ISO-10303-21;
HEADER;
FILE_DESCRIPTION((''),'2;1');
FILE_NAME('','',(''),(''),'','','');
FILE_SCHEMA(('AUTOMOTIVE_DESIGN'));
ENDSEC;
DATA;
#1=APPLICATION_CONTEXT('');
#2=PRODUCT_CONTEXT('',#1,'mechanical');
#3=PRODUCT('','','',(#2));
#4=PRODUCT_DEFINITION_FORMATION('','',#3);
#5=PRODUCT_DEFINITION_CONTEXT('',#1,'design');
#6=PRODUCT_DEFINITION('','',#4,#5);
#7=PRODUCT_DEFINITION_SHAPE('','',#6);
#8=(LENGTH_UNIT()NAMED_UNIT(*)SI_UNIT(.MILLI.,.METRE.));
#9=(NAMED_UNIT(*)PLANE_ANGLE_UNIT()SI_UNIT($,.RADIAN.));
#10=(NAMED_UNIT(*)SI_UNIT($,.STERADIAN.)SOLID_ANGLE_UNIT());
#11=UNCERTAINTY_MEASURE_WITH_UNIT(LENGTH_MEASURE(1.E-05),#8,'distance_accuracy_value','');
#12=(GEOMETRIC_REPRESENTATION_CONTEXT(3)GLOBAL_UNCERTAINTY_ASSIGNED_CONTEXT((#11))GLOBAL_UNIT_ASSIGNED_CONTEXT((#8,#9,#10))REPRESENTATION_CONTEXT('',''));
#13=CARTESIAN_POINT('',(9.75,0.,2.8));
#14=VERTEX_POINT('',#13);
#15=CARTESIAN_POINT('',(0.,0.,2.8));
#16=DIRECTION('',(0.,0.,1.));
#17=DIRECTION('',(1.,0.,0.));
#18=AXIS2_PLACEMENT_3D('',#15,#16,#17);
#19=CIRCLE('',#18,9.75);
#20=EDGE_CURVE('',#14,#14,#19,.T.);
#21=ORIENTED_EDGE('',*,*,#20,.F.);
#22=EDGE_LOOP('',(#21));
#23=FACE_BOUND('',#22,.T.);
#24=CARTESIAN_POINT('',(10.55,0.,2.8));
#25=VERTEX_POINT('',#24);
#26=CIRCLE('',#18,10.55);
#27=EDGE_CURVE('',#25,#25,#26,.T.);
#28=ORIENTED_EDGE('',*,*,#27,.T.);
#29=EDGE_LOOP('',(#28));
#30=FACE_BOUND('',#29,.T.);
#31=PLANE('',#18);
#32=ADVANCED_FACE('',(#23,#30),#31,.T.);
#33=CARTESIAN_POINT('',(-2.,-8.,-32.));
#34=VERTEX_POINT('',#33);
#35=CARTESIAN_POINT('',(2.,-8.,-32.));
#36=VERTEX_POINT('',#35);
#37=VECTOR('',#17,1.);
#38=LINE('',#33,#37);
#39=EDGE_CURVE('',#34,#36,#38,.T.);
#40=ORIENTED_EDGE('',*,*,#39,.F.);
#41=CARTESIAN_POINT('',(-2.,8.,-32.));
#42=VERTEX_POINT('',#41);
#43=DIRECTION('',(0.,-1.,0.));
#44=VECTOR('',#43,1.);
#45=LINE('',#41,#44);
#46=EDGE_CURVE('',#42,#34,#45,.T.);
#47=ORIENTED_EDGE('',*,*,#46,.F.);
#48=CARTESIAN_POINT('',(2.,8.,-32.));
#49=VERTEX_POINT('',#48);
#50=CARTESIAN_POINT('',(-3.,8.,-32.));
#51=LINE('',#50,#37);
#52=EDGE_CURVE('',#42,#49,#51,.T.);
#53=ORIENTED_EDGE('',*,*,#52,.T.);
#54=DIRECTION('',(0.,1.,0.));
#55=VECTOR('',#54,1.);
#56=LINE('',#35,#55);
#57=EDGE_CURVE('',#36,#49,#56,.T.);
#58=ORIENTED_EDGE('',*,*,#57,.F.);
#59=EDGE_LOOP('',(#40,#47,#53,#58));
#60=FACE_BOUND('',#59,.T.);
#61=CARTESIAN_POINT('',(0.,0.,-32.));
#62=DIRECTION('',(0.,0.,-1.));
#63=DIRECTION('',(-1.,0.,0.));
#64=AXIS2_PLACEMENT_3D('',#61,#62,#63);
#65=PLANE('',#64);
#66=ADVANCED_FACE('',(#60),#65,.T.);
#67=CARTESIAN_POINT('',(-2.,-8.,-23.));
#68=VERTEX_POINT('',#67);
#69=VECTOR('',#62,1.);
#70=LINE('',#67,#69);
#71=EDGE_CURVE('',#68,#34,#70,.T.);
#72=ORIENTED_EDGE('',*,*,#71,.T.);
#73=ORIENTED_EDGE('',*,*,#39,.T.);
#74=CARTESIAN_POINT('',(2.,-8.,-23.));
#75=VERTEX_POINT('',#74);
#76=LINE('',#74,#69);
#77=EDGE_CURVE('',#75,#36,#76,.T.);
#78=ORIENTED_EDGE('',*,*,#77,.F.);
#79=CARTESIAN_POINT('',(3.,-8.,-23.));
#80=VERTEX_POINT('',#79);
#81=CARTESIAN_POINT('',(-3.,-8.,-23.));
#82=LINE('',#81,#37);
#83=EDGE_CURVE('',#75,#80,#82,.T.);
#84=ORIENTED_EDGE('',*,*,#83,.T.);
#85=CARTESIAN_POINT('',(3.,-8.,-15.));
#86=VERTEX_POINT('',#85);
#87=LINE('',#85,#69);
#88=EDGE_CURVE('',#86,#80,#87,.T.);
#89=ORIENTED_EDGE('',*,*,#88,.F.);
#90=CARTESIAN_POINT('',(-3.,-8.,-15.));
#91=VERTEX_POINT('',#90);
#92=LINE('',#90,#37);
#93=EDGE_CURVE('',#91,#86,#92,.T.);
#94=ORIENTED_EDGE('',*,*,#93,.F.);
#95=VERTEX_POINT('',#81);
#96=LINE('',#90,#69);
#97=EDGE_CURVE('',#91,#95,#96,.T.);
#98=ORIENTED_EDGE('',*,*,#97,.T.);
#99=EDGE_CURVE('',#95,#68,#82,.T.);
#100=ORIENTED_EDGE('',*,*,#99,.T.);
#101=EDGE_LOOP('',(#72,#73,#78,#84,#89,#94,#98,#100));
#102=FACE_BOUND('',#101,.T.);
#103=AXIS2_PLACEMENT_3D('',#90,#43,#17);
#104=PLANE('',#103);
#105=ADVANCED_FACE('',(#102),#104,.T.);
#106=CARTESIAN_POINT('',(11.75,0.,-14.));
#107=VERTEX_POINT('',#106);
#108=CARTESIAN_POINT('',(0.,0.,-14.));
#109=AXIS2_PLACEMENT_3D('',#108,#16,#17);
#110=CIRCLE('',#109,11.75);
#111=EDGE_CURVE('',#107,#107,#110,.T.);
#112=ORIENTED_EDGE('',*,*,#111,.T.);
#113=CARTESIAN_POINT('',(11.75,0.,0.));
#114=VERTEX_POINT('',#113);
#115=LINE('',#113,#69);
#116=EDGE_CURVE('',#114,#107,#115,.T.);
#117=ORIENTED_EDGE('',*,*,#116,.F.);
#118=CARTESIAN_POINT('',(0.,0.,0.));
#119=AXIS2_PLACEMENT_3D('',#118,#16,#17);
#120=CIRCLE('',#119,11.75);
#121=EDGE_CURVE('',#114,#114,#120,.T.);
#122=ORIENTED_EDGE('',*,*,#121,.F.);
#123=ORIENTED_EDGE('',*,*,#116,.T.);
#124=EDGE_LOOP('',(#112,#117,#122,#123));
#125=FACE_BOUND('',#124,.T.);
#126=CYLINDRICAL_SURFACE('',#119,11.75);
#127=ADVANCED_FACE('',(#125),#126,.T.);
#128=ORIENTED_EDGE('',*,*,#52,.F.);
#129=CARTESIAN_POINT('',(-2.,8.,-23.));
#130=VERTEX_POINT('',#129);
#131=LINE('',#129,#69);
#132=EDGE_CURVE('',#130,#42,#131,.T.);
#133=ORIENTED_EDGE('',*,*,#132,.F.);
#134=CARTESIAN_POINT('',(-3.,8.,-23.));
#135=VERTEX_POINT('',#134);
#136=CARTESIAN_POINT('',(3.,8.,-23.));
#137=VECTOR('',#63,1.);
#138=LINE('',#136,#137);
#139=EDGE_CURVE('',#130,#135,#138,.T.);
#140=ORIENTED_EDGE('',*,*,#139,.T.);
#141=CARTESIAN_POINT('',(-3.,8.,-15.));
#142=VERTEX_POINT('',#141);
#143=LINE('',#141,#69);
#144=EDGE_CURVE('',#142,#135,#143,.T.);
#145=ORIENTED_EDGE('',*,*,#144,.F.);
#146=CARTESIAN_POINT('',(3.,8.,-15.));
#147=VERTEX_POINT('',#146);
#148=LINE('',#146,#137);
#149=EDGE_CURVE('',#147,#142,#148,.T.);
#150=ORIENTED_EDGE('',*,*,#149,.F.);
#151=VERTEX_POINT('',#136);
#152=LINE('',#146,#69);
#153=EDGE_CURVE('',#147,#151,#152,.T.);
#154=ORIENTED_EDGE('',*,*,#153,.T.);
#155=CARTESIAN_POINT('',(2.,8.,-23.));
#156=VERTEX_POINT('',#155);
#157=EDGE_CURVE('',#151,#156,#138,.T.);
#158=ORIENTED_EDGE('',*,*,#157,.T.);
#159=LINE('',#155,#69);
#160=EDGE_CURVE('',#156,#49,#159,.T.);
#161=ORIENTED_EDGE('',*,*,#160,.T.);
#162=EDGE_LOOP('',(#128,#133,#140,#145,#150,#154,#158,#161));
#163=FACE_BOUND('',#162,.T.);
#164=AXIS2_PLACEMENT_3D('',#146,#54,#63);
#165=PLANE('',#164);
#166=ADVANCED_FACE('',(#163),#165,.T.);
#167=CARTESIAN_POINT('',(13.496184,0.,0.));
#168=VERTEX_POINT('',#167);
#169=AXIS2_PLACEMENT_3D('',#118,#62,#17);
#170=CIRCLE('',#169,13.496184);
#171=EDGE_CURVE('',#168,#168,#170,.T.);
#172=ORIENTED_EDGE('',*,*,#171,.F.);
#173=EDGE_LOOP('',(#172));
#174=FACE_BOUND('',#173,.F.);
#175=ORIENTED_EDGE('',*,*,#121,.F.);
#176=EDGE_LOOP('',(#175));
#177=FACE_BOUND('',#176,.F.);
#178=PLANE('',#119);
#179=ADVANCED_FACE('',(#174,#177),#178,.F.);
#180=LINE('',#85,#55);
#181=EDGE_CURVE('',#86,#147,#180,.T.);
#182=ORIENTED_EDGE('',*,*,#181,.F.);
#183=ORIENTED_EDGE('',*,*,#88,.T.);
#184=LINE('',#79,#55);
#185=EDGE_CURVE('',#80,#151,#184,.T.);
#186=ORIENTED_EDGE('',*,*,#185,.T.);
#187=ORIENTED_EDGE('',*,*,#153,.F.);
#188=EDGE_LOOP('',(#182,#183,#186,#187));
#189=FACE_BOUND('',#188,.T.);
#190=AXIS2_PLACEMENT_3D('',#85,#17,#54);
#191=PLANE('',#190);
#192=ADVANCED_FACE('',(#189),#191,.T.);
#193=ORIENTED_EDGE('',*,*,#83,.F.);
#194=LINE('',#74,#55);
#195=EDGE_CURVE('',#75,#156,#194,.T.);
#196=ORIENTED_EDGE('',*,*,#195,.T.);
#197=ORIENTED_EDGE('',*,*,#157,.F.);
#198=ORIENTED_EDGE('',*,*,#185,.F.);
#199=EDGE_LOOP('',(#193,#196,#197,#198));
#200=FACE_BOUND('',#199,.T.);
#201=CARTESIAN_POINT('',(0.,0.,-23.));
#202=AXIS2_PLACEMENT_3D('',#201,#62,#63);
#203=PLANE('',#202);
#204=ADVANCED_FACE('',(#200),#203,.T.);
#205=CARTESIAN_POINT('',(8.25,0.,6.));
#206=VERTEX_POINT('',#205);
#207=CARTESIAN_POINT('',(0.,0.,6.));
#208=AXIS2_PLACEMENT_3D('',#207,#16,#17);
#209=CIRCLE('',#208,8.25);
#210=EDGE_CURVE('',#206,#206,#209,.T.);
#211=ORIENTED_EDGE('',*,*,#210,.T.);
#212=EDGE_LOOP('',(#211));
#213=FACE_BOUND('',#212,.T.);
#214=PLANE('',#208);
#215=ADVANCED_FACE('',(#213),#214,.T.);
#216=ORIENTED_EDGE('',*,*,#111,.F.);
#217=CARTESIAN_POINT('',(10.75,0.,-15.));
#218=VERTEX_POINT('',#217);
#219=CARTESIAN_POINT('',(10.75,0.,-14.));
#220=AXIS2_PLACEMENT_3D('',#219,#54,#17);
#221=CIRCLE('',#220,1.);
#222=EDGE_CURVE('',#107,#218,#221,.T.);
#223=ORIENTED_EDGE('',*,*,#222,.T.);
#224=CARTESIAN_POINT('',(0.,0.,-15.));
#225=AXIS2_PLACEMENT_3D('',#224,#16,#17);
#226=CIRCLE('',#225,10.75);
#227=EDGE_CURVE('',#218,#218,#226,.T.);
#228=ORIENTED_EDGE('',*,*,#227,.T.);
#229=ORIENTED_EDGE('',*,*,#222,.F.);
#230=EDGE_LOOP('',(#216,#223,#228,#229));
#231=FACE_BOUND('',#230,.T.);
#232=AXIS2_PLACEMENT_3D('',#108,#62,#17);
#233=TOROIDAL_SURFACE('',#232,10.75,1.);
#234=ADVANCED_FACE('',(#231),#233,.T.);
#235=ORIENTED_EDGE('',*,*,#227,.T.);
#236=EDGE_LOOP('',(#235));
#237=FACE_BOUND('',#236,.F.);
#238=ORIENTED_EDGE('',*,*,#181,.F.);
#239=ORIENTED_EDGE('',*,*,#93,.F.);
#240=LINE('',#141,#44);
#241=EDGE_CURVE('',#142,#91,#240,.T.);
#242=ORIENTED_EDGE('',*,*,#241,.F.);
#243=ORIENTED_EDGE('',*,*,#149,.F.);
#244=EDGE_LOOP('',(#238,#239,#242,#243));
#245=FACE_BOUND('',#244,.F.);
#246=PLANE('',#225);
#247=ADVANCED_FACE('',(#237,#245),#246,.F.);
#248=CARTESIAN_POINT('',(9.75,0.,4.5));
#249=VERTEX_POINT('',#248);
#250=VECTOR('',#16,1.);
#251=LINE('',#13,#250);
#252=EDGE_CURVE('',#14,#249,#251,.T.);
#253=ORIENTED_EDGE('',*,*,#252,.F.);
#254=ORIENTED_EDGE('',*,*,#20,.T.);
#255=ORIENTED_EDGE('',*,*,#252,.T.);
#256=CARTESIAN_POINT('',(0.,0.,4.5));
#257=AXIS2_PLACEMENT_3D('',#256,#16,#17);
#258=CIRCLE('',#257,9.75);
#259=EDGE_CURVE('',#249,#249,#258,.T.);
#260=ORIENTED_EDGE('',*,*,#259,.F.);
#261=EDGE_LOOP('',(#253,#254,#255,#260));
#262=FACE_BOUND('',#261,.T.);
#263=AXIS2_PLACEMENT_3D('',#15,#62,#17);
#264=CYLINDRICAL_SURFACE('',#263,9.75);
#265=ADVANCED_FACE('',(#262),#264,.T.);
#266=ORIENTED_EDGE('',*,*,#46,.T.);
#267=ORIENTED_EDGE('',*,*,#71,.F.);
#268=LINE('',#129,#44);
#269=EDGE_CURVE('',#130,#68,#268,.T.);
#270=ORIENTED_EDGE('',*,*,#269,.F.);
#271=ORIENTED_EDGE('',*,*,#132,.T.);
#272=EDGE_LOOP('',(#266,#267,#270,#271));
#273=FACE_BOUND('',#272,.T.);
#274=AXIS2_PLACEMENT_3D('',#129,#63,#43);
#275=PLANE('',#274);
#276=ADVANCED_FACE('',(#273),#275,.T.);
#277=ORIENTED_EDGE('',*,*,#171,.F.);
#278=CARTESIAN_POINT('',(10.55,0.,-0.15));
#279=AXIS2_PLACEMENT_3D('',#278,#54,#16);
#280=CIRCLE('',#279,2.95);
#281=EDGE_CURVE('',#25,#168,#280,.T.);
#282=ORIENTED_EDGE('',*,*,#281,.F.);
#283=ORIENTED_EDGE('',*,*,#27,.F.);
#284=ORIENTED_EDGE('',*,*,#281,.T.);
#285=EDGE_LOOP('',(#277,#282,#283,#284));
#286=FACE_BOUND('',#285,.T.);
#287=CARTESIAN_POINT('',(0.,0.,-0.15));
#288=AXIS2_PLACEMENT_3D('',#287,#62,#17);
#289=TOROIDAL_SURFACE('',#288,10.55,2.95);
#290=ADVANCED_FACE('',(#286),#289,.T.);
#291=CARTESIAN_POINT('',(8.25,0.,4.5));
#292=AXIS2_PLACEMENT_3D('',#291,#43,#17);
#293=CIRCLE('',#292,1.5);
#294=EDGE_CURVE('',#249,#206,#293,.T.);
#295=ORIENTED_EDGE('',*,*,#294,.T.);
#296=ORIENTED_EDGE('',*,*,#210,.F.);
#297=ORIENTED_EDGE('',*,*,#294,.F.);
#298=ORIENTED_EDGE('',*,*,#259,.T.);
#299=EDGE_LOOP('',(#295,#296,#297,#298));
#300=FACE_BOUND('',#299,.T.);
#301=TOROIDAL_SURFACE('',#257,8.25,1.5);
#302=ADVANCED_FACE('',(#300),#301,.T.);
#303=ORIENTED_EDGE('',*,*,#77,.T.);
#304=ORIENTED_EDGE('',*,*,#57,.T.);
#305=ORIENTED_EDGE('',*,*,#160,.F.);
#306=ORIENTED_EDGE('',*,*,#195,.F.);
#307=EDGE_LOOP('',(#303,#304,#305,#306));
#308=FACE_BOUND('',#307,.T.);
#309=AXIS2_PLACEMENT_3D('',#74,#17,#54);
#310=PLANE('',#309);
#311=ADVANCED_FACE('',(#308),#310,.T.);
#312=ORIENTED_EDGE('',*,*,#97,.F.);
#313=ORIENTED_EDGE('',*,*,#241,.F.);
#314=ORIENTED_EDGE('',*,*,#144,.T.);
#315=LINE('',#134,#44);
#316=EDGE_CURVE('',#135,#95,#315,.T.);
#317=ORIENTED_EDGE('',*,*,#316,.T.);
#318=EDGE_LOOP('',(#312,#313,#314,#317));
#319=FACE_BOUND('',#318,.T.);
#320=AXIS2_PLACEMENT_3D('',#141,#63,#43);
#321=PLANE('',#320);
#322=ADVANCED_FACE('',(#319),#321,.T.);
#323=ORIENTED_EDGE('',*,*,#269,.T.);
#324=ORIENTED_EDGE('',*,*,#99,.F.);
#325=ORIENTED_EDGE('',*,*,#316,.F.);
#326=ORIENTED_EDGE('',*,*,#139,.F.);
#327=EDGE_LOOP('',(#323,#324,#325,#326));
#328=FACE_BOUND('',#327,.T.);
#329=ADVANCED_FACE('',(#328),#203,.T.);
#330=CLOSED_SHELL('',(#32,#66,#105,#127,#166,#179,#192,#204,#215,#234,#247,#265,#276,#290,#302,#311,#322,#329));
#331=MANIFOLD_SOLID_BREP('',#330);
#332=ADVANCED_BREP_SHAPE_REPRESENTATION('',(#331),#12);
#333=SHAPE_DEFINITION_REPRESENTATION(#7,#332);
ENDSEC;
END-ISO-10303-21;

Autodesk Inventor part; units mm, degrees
ref_plane "YZ Plane" through (0, 0, 0) normal (1, 0, 0) x (0, 1, 0)
ref_plane "XZ Plane" through (0, 0, 0) normal (0, 1, 0) x (-1, 0, 0)
ref_plane "XY Plane" through (0, 0, 0) normal (0, 0, 1) x (1, 0, 0)
sketch "Sketch1" plane through (0, 0, 0) normal (0, 0, 1) x (1, 0, 0)
  circle A0 centre (0, 0) radius 11.75
  dimension "d0" = 23.5
extrude "Extrusion1" add sketch "Sketch1" against normal blind 15
sketch "Sketch2" plane through (0, 0, 0) normal (0, 0, 1) x (1, 0, 0)
  circle A0 centre (0, 0) radius 11.75 projected
  circle A1 centre (0, 0) radius 13.5
  dimension "d3" = 27
extrude "Extrusion2" add sketch "Sketch2" along normal blind 2.8 contours A0 | A1
sketch "Sketch3" plane through (0, 0, 2.8) normal (0, 0, 1) x (1, 0, 0)
  circle A0 centre (0, 0) radius 13.5 projected
  circle A1 centre (0, 0) radius 9.75
  dimension "d8" = 19.5
extrude "Extrusion3" add sketch "Sketch3" along normal blind 3.2 contours A1
fillet "Fillet1" radius 1.5 1 edges at (-9.75, 0, 6)
fillet "Fillet2" radius 2.95 1 edges at (-13.5, 0, 2.8)
fillet "Fillet3" radius 1 1 edges at (-11.75, 0, -15)
sketch "Sketch4" plane through (0, 0, -15) normal (0, 0, -1) x (-1, 0, 0)
  circle A0 centre (0, 0) radius 10.75 projected
  line L0 (-3, 8) -> (3, 8)
  line L1 (3, 8) -> (3, -8)
  line L2 (3, -8) -> (-3, -8)
  line L3 (-3, -8) -> (-3, 8)
  point P0 (3, 0)
  point P1 (0, 8)
  dimension "d14" = 6
  dimension "d16" = 16
extrude "Extrusion4" add sketch "Sketch4" along normal blind 8 contours L0 L1 L2 L3
sketch "Sketch5" plane through (0, 0, -23) normal (0, 0, -1) x (-1, 0, 0)
  line L0 (3, 8) -> (-3, 8) projected
  line L1 (3, -8) -> (3, 8) projected
  line L2 (-2, 8) -> (2, 8)
  line L3 (2, 8) -> (2, -8)
  line L4 (2, -8) -> (-2, -8)
  line L5 (-2, -8) -> (-2, 8)
  point P0 (0, 0)
  point P1 (2, 0)
  point P2 (3, 0)
  point P3 (0, 8)
  point P4 (0, 8)
  dimension "d19" = 4
  dimension "d21" = 16
extrude "Extrusion5" add sketch "Sketch5" along normal blind 9
properties part number "OBSF-24_button" material "Nylon 6"
